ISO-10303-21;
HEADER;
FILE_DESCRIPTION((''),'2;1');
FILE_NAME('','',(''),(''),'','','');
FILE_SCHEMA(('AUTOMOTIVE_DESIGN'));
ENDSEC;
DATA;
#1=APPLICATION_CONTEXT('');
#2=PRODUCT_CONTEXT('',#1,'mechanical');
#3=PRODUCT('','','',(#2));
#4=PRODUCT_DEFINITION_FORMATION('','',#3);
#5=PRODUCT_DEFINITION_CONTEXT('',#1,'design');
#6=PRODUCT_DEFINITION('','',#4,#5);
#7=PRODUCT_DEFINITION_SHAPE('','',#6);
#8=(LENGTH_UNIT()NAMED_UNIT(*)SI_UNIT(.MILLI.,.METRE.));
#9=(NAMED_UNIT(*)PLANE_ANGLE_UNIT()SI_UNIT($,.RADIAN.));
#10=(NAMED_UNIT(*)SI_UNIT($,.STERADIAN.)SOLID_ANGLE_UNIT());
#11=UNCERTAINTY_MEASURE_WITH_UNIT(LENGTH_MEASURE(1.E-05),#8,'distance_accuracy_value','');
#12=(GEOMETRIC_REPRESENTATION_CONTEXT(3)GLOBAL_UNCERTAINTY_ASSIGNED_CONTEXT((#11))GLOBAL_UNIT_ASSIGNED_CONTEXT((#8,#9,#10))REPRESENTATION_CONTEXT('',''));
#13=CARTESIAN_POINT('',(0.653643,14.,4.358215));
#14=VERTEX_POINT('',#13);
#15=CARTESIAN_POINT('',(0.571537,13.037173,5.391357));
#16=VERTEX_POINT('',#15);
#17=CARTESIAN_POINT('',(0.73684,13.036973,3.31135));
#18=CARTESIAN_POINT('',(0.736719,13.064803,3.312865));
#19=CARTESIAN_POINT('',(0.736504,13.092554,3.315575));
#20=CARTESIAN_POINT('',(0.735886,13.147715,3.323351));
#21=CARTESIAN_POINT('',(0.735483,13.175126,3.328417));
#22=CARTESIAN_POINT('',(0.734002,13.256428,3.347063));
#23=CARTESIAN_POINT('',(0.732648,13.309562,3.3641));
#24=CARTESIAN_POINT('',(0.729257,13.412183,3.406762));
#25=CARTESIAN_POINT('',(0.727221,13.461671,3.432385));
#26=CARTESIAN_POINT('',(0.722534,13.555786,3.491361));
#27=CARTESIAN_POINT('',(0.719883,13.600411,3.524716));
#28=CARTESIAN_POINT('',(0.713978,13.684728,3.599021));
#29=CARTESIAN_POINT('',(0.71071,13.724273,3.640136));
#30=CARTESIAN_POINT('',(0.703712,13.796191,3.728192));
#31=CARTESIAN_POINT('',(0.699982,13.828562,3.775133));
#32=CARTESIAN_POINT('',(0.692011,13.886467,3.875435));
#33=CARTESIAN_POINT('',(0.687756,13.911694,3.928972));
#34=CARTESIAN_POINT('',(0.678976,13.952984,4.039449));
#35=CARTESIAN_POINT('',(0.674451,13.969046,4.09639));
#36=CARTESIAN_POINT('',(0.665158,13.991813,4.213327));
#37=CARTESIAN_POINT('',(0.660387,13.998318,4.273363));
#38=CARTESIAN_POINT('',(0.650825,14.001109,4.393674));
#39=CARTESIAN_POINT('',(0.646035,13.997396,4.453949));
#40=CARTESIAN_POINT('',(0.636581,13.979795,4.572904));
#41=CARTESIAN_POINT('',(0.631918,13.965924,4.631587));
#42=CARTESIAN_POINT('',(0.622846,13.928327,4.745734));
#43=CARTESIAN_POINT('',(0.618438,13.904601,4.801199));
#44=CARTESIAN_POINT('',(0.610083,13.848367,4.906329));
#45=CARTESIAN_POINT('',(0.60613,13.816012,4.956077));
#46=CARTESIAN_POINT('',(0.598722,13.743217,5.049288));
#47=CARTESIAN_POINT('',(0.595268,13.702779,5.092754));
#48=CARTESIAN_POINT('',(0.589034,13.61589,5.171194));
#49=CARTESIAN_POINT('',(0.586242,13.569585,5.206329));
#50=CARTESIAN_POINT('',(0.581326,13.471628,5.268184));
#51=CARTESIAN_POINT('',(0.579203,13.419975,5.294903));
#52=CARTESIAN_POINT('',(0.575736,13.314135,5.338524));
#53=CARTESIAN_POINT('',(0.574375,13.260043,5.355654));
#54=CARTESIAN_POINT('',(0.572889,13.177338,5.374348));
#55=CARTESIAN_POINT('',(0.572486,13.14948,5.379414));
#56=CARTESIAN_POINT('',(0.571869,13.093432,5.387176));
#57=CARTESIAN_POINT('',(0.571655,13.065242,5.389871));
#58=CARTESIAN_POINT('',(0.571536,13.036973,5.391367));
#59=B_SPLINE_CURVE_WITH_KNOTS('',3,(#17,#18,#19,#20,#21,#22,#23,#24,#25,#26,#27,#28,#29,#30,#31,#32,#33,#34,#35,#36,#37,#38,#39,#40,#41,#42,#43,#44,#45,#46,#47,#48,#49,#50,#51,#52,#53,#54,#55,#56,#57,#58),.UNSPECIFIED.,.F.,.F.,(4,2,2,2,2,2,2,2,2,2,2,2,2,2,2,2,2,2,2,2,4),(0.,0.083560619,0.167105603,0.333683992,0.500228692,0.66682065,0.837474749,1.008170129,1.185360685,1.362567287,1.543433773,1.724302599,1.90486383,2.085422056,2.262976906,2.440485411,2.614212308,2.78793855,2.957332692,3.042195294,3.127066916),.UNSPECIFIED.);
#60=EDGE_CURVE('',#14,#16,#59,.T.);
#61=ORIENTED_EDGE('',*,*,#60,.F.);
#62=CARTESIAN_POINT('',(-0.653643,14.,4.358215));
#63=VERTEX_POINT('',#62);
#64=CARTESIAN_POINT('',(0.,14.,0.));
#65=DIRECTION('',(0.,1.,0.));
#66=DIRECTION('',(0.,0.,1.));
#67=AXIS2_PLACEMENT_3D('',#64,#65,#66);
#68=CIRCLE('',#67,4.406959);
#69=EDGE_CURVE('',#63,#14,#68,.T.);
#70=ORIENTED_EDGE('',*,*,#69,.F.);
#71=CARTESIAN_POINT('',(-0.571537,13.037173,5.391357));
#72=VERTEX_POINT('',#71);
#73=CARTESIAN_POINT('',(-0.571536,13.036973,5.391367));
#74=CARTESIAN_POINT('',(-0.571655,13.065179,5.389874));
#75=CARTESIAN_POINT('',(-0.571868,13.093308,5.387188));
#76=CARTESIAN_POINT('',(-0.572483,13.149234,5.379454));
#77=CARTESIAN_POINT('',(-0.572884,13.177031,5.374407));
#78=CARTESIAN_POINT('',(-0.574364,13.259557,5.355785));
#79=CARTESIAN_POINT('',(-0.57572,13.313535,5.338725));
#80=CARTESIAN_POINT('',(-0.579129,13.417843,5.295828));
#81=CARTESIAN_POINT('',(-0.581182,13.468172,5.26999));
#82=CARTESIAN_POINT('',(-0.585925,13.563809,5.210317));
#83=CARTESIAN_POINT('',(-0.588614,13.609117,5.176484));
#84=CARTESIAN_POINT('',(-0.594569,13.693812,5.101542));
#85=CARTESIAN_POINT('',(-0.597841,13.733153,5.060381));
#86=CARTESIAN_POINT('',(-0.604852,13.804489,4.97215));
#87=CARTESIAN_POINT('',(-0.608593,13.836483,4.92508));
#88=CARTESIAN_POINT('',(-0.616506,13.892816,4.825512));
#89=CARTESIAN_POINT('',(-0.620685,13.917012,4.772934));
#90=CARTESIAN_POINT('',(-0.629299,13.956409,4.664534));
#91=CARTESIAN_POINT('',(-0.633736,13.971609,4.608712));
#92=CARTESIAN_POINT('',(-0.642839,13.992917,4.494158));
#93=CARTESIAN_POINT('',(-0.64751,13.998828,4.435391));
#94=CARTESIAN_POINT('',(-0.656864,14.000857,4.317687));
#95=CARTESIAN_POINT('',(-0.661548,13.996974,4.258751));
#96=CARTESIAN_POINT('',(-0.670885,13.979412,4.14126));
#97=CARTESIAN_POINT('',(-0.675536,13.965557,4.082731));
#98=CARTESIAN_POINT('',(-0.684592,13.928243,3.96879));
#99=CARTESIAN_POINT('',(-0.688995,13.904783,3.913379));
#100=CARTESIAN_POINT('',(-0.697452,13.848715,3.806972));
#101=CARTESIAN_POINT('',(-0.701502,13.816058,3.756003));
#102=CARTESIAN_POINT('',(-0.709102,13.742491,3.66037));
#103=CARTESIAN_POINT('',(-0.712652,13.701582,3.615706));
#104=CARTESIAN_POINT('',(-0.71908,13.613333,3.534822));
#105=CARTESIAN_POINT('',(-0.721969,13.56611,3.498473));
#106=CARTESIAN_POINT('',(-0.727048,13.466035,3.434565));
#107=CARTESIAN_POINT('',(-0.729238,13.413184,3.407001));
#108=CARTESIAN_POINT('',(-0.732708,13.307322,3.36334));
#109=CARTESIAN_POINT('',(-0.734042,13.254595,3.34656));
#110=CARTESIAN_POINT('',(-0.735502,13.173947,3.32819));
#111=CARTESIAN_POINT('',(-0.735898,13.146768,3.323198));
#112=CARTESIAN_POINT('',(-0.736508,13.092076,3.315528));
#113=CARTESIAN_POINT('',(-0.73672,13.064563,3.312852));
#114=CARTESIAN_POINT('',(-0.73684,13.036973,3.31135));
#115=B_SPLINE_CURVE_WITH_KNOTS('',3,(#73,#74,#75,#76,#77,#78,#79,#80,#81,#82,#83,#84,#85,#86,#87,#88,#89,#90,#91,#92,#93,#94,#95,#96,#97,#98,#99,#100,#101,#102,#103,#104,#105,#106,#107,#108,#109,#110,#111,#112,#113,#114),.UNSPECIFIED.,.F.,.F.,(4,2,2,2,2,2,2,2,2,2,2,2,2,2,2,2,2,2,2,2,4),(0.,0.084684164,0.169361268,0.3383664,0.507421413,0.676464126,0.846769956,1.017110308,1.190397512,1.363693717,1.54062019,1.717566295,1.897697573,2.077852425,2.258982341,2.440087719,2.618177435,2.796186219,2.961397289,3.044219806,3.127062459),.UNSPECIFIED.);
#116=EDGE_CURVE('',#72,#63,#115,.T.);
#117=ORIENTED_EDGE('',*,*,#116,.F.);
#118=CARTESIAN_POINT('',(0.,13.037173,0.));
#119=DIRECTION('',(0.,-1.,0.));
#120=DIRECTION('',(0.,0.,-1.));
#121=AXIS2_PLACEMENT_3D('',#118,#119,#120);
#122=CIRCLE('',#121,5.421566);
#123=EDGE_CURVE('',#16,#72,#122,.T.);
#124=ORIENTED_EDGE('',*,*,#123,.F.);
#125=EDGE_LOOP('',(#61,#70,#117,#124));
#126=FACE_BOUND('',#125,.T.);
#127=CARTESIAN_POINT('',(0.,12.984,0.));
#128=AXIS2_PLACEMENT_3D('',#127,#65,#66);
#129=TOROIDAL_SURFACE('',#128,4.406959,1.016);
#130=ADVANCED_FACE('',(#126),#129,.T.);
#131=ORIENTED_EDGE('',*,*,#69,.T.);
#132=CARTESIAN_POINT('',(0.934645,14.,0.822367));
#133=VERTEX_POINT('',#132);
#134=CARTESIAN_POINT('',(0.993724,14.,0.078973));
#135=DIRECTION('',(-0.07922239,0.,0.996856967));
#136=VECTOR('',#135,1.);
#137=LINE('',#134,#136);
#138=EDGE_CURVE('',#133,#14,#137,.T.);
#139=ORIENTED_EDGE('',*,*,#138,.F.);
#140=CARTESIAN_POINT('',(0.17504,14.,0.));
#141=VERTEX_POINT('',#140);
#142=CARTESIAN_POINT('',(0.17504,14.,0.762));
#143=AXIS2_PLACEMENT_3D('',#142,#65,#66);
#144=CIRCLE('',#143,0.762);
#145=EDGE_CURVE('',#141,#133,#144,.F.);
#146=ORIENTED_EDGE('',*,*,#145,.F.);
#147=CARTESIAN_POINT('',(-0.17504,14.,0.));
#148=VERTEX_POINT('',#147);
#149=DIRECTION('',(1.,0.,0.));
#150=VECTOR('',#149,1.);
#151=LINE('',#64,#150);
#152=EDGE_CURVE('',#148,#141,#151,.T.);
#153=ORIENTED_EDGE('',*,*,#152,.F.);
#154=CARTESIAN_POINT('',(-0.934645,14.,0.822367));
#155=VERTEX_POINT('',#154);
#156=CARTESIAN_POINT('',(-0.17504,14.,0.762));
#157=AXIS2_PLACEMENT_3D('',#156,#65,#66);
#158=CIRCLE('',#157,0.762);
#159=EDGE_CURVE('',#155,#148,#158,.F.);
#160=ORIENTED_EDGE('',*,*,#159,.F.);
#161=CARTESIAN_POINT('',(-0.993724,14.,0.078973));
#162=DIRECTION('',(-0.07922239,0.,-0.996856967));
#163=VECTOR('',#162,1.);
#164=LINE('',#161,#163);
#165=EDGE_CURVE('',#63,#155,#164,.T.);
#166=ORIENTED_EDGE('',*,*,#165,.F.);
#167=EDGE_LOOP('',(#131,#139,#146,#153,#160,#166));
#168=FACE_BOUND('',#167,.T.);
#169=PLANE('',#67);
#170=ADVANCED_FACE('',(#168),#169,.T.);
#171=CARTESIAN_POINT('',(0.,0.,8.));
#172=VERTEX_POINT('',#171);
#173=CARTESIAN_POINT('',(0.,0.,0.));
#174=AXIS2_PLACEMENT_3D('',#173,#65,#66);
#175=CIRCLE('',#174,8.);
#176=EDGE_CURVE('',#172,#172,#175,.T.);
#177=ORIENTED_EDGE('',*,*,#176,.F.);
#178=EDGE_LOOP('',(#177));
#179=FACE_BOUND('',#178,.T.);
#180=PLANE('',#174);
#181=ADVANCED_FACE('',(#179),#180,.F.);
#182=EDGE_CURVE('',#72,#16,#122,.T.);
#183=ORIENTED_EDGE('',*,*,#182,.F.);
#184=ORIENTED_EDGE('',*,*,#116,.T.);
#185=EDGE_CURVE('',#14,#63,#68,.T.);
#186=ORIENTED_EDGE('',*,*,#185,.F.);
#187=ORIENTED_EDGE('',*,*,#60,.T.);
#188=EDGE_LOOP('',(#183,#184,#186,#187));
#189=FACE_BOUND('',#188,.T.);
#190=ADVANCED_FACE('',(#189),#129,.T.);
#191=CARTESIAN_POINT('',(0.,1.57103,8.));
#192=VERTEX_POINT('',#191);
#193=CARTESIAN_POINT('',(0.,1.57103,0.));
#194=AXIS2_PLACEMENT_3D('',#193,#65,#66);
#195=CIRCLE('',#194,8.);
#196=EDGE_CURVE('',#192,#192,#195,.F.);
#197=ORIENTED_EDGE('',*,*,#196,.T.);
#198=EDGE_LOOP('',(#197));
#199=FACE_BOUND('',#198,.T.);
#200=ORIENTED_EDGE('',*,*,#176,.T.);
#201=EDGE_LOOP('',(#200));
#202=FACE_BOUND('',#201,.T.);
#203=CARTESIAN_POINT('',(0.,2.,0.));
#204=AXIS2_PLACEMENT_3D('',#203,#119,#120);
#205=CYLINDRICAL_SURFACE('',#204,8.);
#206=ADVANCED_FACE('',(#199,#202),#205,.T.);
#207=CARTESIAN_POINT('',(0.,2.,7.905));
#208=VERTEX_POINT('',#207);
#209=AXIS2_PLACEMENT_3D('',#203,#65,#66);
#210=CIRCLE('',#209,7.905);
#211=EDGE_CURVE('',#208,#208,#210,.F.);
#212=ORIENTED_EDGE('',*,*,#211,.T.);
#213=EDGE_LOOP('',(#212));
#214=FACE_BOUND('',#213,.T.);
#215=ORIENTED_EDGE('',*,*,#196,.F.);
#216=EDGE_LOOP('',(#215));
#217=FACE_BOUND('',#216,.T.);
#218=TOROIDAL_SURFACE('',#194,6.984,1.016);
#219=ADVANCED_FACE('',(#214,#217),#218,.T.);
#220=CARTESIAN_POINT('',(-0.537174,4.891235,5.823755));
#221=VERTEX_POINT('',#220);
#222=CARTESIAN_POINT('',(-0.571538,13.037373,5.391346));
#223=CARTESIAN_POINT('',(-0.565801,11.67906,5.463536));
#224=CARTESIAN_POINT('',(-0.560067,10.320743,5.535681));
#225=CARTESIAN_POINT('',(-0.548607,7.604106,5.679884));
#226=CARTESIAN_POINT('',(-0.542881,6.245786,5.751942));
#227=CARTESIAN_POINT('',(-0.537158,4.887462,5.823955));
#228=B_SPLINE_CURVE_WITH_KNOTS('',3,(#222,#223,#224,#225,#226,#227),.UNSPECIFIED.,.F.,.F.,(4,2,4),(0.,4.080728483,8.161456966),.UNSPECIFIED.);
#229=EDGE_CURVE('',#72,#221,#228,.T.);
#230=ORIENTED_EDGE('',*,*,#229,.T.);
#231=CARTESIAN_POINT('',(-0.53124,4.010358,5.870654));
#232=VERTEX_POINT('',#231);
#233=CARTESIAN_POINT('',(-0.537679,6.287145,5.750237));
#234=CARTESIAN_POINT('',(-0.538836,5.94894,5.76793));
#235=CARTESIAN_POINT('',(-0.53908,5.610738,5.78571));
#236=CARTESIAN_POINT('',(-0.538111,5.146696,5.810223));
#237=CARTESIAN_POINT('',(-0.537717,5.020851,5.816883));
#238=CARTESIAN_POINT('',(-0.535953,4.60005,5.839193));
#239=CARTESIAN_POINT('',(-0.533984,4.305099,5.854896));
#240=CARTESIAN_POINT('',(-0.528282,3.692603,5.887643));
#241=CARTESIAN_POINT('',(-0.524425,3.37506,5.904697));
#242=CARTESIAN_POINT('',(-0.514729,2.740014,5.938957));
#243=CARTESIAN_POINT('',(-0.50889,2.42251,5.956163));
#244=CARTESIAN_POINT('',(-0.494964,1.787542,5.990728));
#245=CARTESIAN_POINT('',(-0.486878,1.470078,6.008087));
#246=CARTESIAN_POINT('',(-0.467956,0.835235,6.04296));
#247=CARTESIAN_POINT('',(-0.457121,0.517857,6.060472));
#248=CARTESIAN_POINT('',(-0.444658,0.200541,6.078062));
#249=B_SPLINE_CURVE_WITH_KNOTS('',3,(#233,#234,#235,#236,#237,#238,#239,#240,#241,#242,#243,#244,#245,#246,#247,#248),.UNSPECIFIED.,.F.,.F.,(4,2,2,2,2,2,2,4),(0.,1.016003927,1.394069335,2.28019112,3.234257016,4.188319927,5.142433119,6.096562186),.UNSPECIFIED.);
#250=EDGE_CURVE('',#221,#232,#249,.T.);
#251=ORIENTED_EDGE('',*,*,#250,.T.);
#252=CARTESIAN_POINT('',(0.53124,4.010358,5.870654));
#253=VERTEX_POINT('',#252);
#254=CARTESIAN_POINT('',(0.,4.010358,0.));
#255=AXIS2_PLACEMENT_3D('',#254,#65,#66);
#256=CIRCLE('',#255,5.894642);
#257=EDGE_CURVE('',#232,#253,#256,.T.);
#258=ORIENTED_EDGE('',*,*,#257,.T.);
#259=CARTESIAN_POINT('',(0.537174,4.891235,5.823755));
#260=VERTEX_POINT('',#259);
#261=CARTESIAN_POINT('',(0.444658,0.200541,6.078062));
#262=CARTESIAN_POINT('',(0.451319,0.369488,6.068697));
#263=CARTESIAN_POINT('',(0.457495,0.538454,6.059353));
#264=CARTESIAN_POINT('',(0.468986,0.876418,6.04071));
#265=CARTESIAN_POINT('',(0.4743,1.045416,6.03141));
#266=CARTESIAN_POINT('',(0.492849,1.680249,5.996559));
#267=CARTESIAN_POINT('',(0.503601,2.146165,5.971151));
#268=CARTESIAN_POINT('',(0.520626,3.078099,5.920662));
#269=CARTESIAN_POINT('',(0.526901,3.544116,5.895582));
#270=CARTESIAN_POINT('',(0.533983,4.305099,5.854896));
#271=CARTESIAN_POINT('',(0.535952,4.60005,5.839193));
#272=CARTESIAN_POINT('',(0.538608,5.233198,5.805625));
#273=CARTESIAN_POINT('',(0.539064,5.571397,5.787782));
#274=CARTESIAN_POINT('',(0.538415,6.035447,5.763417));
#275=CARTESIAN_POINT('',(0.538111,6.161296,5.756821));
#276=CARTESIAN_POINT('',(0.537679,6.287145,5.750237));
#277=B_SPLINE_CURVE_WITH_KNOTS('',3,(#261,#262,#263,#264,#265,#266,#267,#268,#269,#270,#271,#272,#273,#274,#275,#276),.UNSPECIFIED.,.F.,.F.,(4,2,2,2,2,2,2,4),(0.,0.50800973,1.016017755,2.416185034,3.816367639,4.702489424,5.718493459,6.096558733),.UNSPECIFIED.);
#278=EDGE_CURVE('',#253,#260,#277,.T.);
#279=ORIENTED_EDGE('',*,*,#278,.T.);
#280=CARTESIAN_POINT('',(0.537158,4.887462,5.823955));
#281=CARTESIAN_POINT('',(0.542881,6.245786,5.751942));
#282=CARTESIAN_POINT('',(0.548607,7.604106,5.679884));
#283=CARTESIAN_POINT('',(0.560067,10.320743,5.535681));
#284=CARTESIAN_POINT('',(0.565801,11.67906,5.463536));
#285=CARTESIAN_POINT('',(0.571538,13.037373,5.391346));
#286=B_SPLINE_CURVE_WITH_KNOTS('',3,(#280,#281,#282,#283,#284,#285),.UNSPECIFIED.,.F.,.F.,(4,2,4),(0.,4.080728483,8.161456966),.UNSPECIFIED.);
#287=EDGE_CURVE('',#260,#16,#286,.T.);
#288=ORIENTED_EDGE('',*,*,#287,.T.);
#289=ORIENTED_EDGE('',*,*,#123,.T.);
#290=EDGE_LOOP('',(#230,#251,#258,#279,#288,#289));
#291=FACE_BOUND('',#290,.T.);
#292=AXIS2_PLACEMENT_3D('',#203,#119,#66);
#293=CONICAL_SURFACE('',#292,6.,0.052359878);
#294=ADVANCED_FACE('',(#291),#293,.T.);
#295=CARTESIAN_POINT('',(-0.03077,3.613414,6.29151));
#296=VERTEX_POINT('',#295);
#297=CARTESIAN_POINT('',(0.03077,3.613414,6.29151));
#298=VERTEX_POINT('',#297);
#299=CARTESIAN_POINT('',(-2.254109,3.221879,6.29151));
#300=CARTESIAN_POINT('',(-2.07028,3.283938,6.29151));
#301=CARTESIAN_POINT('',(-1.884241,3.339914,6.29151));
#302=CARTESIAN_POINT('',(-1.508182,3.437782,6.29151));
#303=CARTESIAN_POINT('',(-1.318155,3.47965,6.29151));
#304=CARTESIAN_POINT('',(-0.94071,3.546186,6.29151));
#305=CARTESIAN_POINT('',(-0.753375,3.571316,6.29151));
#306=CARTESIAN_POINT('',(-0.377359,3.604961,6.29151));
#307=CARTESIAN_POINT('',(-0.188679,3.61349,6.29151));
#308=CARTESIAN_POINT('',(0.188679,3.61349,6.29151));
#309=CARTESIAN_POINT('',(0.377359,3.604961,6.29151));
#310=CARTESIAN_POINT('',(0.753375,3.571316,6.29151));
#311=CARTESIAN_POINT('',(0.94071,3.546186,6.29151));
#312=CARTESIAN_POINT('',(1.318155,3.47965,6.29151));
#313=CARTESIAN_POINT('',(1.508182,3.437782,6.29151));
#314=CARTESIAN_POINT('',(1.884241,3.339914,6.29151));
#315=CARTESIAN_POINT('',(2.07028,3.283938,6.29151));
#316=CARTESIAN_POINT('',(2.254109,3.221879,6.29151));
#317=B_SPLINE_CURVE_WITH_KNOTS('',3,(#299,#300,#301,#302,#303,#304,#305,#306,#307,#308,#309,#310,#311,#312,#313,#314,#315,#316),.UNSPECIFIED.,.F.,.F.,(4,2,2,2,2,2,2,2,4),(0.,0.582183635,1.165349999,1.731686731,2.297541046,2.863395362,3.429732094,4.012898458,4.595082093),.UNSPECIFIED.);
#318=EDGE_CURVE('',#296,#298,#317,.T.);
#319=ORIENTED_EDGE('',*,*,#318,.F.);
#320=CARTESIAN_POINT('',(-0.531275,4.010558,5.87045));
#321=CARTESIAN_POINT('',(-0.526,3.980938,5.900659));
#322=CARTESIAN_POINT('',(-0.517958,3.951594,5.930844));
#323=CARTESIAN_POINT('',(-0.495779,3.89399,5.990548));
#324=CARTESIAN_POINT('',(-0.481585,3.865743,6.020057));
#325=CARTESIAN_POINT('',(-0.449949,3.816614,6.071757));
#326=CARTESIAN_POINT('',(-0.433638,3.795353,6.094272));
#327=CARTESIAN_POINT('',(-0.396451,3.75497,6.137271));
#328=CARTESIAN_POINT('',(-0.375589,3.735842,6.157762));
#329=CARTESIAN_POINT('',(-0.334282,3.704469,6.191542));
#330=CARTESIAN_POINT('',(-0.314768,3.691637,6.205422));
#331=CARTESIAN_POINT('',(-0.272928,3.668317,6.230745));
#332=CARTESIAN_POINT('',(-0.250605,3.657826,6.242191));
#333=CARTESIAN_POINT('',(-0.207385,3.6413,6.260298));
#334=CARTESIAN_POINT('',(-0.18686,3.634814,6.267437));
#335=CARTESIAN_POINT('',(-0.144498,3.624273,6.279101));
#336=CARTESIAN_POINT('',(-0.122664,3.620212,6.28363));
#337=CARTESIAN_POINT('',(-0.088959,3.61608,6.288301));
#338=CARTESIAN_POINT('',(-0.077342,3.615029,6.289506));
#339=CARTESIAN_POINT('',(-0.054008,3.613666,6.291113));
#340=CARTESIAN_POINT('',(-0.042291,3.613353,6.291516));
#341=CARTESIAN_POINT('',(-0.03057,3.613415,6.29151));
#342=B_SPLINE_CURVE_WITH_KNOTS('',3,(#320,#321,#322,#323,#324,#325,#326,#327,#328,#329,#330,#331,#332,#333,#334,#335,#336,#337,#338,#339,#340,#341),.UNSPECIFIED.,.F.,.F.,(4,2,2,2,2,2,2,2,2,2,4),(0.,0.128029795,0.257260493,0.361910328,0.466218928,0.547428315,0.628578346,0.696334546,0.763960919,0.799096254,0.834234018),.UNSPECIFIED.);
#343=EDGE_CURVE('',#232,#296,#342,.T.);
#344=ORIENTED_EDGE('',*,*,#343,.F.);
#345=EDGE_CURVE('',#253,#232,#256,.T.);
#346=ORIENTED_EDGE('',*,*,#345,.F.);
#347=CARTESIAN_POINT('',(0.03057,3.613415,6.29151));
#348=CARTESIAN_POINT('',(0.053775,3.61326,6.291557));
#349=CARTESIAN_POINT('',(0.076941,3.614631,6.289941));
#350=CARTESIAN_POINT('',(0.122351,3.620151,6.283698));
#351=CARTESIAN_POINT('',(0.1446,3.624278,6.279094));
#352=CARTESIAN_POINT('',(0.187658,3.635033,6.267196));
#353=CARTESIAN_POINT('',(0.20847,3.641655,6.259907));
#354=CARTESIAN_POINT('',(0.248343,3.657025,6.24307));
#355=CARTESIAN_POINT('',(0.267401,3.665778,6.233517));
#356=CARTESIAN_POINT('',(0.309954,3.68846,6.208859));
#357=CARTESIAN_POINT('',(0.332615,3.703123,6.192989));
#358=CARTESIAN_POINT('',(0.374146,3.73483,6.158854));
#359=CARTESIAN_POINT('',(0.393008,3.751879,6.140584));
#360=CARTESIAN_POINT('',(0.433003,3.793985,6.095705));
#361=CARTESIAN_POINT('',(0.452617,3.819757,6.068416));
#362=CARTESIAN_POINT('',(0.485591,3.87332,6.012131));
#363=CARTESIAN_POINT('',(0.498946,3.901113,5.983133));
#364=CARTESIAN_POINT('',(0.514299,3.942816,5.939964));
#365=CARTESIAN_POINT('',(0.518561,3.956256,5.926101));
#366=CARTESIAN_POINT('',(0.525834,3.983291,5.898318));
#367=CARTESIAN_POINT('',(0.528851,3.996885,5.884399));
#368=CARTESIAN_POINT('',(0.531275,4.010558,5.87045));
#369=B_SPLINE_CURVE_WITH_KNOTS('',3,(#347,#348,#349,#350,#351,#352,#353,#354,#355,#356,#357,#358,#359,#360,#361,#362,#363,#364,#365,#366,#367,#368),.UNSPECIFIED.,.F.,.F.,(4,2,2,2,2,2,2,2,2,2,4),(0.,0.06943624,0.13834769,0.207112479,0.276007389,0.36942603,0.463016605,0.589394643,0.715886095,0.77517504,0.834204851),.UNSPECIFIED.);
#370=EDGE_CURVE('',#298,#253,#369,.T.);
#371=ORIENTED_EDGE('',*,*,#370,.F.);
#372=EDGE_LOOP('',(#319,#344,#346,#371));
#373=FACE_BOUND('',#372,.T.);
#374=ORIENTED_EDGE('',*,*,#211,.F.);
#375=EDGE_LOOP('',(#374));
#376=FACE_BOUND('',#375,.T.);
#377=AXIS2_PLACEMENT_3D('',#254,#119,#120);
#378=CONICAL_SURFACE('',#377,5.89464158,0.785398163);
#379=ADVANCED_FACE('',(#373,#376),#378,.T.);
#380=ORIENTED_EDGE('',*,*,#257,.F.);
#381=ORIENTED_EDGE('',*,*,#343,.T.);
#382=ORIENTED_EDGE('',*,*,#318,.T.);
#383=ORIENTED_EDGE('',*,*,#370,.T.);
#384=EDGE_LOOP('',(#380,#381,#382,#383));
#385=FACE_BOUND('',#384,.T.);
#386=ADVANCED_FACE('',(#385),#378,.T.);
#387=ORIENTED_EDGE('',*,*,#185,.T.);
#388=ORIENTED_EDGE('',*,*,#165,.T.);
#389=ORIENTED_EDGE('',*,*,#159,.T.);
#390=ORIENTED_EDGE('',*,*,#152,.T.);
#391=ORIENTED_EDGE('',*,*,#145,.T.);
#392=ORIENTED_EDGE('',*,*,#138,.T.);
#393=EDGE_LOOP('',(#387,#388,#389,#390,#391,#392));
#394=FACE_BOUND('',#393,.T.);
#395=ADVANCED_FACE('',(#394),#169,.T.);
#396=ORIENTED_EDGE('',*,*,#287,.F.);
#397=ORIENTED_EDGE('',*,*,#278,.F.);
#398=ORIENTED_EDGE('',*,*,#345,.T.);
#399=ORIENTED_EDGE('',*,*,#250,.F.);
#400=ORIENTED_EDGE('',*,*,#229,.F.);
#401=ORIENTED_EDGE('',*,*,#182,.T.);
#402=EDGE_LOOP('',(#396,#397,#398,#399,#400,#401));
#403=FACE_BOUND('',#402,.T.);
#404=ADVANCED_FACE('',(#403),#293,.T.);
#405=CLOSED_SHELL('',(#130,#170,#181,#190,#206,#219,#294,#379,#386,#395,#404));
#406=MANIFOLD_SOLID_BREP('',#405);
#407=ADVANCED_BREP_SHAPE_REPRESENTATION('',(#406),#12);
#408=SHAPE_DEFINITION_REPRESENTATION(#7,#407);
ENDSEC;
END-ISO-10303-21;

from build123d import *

# Parameters (mm, degrees)
SKETCH1_R           = 8
BOSS_EXTRUDE1_DEPTH = 2
SKETCH2_R           = 6
BOSS_EXTRUDE2_DEPTH = 12
BOSS_EXTRUDE2_TAPER = 3
FILLET1_R           = 1.016
CHAMFER1_SIZE       = 1.905
CHAMFER1_SIZE2      = 2.013117328
FILLET3_R           = 1.016


with BuildPart() as part:
    # Sketch1 → Boss-Extrude1 (new body)
    with BuildSketch(Plane(origin=(0, 0, 0), x_dir=(1, 0, 0), z_dir=(0, 1, 0))):
        with Locations(Location((0, 0, 0), (0, 0, 270))):
            Circle(SKETCH1_R)
    extrude(amount=BOSS_EXTRUDE1_DEPTH)

    # Sketch2 → Boss-Extrude2 (add)
    with BuildSketch(Plane(origin=(0, 2, 0), x_dir=(1, 0, 0), z_dir=(0, 1, 0))):
        Circle(SKETCH2_R)
    extrude(amount=BOSS_EXTRUDE2_DEPTH, taper=BOSS_EXTRUDE2_TAPER)

    # Fillet1
    fillet1_edges = [part.edges().sort_by_distance(p)[0] for p in [
        (-5.371106649, 14, 0),
    ]]
    fillet(fillet1_edges, radius=FILLET1_R)

    # Chamfer1
    chamfer1_edges = [part.edges().sort_by_distance(p)[0] for p in [
        (-6, 2, 0),
    ]]
    chamfer1_side = [part.faces().sort_by_distance(p)[0] for p in [
        (0, 2, -7.77372583),
    ]]
    chamfer(chamfer1_edges, length=CHAMFER1_SIZE, length2=CHAMFER1_SIZE2, reference=chamfer1_side[0])

    # Fillet3
    # the kernel refuses this fillet: 1.016 mm, written as the material it takes off along each edge
    with BuildSketch(Plane(origin=(0, 2, 0), x_dir=(0, 0, 1), z_dir=(-1, 0, 0))) as fillet3_piece_1:
        with BuildLine():
            CenterArc((6.984, -0.428969696), FILLET3_R, 0, 24.97446259)
            Line((8, -0.428969696), (8.02032, -0.428969696))
            Line((8.02032, -0.428969696), (8.02032, 0))
            Line((8.02032, 0), (8, 0.02032))
            ThreePointArc((8, 0.02032), (7.9525, 0.02032), (7.92342, 0.008579394))
            Line((7.92342, 0.008579394), (7.905, 0))
        make_face()
    revolve(axis=Axis((0, 2, 0), (0, 1, 0)), mode=Mode.SUBTRACT)


solid = part.part
